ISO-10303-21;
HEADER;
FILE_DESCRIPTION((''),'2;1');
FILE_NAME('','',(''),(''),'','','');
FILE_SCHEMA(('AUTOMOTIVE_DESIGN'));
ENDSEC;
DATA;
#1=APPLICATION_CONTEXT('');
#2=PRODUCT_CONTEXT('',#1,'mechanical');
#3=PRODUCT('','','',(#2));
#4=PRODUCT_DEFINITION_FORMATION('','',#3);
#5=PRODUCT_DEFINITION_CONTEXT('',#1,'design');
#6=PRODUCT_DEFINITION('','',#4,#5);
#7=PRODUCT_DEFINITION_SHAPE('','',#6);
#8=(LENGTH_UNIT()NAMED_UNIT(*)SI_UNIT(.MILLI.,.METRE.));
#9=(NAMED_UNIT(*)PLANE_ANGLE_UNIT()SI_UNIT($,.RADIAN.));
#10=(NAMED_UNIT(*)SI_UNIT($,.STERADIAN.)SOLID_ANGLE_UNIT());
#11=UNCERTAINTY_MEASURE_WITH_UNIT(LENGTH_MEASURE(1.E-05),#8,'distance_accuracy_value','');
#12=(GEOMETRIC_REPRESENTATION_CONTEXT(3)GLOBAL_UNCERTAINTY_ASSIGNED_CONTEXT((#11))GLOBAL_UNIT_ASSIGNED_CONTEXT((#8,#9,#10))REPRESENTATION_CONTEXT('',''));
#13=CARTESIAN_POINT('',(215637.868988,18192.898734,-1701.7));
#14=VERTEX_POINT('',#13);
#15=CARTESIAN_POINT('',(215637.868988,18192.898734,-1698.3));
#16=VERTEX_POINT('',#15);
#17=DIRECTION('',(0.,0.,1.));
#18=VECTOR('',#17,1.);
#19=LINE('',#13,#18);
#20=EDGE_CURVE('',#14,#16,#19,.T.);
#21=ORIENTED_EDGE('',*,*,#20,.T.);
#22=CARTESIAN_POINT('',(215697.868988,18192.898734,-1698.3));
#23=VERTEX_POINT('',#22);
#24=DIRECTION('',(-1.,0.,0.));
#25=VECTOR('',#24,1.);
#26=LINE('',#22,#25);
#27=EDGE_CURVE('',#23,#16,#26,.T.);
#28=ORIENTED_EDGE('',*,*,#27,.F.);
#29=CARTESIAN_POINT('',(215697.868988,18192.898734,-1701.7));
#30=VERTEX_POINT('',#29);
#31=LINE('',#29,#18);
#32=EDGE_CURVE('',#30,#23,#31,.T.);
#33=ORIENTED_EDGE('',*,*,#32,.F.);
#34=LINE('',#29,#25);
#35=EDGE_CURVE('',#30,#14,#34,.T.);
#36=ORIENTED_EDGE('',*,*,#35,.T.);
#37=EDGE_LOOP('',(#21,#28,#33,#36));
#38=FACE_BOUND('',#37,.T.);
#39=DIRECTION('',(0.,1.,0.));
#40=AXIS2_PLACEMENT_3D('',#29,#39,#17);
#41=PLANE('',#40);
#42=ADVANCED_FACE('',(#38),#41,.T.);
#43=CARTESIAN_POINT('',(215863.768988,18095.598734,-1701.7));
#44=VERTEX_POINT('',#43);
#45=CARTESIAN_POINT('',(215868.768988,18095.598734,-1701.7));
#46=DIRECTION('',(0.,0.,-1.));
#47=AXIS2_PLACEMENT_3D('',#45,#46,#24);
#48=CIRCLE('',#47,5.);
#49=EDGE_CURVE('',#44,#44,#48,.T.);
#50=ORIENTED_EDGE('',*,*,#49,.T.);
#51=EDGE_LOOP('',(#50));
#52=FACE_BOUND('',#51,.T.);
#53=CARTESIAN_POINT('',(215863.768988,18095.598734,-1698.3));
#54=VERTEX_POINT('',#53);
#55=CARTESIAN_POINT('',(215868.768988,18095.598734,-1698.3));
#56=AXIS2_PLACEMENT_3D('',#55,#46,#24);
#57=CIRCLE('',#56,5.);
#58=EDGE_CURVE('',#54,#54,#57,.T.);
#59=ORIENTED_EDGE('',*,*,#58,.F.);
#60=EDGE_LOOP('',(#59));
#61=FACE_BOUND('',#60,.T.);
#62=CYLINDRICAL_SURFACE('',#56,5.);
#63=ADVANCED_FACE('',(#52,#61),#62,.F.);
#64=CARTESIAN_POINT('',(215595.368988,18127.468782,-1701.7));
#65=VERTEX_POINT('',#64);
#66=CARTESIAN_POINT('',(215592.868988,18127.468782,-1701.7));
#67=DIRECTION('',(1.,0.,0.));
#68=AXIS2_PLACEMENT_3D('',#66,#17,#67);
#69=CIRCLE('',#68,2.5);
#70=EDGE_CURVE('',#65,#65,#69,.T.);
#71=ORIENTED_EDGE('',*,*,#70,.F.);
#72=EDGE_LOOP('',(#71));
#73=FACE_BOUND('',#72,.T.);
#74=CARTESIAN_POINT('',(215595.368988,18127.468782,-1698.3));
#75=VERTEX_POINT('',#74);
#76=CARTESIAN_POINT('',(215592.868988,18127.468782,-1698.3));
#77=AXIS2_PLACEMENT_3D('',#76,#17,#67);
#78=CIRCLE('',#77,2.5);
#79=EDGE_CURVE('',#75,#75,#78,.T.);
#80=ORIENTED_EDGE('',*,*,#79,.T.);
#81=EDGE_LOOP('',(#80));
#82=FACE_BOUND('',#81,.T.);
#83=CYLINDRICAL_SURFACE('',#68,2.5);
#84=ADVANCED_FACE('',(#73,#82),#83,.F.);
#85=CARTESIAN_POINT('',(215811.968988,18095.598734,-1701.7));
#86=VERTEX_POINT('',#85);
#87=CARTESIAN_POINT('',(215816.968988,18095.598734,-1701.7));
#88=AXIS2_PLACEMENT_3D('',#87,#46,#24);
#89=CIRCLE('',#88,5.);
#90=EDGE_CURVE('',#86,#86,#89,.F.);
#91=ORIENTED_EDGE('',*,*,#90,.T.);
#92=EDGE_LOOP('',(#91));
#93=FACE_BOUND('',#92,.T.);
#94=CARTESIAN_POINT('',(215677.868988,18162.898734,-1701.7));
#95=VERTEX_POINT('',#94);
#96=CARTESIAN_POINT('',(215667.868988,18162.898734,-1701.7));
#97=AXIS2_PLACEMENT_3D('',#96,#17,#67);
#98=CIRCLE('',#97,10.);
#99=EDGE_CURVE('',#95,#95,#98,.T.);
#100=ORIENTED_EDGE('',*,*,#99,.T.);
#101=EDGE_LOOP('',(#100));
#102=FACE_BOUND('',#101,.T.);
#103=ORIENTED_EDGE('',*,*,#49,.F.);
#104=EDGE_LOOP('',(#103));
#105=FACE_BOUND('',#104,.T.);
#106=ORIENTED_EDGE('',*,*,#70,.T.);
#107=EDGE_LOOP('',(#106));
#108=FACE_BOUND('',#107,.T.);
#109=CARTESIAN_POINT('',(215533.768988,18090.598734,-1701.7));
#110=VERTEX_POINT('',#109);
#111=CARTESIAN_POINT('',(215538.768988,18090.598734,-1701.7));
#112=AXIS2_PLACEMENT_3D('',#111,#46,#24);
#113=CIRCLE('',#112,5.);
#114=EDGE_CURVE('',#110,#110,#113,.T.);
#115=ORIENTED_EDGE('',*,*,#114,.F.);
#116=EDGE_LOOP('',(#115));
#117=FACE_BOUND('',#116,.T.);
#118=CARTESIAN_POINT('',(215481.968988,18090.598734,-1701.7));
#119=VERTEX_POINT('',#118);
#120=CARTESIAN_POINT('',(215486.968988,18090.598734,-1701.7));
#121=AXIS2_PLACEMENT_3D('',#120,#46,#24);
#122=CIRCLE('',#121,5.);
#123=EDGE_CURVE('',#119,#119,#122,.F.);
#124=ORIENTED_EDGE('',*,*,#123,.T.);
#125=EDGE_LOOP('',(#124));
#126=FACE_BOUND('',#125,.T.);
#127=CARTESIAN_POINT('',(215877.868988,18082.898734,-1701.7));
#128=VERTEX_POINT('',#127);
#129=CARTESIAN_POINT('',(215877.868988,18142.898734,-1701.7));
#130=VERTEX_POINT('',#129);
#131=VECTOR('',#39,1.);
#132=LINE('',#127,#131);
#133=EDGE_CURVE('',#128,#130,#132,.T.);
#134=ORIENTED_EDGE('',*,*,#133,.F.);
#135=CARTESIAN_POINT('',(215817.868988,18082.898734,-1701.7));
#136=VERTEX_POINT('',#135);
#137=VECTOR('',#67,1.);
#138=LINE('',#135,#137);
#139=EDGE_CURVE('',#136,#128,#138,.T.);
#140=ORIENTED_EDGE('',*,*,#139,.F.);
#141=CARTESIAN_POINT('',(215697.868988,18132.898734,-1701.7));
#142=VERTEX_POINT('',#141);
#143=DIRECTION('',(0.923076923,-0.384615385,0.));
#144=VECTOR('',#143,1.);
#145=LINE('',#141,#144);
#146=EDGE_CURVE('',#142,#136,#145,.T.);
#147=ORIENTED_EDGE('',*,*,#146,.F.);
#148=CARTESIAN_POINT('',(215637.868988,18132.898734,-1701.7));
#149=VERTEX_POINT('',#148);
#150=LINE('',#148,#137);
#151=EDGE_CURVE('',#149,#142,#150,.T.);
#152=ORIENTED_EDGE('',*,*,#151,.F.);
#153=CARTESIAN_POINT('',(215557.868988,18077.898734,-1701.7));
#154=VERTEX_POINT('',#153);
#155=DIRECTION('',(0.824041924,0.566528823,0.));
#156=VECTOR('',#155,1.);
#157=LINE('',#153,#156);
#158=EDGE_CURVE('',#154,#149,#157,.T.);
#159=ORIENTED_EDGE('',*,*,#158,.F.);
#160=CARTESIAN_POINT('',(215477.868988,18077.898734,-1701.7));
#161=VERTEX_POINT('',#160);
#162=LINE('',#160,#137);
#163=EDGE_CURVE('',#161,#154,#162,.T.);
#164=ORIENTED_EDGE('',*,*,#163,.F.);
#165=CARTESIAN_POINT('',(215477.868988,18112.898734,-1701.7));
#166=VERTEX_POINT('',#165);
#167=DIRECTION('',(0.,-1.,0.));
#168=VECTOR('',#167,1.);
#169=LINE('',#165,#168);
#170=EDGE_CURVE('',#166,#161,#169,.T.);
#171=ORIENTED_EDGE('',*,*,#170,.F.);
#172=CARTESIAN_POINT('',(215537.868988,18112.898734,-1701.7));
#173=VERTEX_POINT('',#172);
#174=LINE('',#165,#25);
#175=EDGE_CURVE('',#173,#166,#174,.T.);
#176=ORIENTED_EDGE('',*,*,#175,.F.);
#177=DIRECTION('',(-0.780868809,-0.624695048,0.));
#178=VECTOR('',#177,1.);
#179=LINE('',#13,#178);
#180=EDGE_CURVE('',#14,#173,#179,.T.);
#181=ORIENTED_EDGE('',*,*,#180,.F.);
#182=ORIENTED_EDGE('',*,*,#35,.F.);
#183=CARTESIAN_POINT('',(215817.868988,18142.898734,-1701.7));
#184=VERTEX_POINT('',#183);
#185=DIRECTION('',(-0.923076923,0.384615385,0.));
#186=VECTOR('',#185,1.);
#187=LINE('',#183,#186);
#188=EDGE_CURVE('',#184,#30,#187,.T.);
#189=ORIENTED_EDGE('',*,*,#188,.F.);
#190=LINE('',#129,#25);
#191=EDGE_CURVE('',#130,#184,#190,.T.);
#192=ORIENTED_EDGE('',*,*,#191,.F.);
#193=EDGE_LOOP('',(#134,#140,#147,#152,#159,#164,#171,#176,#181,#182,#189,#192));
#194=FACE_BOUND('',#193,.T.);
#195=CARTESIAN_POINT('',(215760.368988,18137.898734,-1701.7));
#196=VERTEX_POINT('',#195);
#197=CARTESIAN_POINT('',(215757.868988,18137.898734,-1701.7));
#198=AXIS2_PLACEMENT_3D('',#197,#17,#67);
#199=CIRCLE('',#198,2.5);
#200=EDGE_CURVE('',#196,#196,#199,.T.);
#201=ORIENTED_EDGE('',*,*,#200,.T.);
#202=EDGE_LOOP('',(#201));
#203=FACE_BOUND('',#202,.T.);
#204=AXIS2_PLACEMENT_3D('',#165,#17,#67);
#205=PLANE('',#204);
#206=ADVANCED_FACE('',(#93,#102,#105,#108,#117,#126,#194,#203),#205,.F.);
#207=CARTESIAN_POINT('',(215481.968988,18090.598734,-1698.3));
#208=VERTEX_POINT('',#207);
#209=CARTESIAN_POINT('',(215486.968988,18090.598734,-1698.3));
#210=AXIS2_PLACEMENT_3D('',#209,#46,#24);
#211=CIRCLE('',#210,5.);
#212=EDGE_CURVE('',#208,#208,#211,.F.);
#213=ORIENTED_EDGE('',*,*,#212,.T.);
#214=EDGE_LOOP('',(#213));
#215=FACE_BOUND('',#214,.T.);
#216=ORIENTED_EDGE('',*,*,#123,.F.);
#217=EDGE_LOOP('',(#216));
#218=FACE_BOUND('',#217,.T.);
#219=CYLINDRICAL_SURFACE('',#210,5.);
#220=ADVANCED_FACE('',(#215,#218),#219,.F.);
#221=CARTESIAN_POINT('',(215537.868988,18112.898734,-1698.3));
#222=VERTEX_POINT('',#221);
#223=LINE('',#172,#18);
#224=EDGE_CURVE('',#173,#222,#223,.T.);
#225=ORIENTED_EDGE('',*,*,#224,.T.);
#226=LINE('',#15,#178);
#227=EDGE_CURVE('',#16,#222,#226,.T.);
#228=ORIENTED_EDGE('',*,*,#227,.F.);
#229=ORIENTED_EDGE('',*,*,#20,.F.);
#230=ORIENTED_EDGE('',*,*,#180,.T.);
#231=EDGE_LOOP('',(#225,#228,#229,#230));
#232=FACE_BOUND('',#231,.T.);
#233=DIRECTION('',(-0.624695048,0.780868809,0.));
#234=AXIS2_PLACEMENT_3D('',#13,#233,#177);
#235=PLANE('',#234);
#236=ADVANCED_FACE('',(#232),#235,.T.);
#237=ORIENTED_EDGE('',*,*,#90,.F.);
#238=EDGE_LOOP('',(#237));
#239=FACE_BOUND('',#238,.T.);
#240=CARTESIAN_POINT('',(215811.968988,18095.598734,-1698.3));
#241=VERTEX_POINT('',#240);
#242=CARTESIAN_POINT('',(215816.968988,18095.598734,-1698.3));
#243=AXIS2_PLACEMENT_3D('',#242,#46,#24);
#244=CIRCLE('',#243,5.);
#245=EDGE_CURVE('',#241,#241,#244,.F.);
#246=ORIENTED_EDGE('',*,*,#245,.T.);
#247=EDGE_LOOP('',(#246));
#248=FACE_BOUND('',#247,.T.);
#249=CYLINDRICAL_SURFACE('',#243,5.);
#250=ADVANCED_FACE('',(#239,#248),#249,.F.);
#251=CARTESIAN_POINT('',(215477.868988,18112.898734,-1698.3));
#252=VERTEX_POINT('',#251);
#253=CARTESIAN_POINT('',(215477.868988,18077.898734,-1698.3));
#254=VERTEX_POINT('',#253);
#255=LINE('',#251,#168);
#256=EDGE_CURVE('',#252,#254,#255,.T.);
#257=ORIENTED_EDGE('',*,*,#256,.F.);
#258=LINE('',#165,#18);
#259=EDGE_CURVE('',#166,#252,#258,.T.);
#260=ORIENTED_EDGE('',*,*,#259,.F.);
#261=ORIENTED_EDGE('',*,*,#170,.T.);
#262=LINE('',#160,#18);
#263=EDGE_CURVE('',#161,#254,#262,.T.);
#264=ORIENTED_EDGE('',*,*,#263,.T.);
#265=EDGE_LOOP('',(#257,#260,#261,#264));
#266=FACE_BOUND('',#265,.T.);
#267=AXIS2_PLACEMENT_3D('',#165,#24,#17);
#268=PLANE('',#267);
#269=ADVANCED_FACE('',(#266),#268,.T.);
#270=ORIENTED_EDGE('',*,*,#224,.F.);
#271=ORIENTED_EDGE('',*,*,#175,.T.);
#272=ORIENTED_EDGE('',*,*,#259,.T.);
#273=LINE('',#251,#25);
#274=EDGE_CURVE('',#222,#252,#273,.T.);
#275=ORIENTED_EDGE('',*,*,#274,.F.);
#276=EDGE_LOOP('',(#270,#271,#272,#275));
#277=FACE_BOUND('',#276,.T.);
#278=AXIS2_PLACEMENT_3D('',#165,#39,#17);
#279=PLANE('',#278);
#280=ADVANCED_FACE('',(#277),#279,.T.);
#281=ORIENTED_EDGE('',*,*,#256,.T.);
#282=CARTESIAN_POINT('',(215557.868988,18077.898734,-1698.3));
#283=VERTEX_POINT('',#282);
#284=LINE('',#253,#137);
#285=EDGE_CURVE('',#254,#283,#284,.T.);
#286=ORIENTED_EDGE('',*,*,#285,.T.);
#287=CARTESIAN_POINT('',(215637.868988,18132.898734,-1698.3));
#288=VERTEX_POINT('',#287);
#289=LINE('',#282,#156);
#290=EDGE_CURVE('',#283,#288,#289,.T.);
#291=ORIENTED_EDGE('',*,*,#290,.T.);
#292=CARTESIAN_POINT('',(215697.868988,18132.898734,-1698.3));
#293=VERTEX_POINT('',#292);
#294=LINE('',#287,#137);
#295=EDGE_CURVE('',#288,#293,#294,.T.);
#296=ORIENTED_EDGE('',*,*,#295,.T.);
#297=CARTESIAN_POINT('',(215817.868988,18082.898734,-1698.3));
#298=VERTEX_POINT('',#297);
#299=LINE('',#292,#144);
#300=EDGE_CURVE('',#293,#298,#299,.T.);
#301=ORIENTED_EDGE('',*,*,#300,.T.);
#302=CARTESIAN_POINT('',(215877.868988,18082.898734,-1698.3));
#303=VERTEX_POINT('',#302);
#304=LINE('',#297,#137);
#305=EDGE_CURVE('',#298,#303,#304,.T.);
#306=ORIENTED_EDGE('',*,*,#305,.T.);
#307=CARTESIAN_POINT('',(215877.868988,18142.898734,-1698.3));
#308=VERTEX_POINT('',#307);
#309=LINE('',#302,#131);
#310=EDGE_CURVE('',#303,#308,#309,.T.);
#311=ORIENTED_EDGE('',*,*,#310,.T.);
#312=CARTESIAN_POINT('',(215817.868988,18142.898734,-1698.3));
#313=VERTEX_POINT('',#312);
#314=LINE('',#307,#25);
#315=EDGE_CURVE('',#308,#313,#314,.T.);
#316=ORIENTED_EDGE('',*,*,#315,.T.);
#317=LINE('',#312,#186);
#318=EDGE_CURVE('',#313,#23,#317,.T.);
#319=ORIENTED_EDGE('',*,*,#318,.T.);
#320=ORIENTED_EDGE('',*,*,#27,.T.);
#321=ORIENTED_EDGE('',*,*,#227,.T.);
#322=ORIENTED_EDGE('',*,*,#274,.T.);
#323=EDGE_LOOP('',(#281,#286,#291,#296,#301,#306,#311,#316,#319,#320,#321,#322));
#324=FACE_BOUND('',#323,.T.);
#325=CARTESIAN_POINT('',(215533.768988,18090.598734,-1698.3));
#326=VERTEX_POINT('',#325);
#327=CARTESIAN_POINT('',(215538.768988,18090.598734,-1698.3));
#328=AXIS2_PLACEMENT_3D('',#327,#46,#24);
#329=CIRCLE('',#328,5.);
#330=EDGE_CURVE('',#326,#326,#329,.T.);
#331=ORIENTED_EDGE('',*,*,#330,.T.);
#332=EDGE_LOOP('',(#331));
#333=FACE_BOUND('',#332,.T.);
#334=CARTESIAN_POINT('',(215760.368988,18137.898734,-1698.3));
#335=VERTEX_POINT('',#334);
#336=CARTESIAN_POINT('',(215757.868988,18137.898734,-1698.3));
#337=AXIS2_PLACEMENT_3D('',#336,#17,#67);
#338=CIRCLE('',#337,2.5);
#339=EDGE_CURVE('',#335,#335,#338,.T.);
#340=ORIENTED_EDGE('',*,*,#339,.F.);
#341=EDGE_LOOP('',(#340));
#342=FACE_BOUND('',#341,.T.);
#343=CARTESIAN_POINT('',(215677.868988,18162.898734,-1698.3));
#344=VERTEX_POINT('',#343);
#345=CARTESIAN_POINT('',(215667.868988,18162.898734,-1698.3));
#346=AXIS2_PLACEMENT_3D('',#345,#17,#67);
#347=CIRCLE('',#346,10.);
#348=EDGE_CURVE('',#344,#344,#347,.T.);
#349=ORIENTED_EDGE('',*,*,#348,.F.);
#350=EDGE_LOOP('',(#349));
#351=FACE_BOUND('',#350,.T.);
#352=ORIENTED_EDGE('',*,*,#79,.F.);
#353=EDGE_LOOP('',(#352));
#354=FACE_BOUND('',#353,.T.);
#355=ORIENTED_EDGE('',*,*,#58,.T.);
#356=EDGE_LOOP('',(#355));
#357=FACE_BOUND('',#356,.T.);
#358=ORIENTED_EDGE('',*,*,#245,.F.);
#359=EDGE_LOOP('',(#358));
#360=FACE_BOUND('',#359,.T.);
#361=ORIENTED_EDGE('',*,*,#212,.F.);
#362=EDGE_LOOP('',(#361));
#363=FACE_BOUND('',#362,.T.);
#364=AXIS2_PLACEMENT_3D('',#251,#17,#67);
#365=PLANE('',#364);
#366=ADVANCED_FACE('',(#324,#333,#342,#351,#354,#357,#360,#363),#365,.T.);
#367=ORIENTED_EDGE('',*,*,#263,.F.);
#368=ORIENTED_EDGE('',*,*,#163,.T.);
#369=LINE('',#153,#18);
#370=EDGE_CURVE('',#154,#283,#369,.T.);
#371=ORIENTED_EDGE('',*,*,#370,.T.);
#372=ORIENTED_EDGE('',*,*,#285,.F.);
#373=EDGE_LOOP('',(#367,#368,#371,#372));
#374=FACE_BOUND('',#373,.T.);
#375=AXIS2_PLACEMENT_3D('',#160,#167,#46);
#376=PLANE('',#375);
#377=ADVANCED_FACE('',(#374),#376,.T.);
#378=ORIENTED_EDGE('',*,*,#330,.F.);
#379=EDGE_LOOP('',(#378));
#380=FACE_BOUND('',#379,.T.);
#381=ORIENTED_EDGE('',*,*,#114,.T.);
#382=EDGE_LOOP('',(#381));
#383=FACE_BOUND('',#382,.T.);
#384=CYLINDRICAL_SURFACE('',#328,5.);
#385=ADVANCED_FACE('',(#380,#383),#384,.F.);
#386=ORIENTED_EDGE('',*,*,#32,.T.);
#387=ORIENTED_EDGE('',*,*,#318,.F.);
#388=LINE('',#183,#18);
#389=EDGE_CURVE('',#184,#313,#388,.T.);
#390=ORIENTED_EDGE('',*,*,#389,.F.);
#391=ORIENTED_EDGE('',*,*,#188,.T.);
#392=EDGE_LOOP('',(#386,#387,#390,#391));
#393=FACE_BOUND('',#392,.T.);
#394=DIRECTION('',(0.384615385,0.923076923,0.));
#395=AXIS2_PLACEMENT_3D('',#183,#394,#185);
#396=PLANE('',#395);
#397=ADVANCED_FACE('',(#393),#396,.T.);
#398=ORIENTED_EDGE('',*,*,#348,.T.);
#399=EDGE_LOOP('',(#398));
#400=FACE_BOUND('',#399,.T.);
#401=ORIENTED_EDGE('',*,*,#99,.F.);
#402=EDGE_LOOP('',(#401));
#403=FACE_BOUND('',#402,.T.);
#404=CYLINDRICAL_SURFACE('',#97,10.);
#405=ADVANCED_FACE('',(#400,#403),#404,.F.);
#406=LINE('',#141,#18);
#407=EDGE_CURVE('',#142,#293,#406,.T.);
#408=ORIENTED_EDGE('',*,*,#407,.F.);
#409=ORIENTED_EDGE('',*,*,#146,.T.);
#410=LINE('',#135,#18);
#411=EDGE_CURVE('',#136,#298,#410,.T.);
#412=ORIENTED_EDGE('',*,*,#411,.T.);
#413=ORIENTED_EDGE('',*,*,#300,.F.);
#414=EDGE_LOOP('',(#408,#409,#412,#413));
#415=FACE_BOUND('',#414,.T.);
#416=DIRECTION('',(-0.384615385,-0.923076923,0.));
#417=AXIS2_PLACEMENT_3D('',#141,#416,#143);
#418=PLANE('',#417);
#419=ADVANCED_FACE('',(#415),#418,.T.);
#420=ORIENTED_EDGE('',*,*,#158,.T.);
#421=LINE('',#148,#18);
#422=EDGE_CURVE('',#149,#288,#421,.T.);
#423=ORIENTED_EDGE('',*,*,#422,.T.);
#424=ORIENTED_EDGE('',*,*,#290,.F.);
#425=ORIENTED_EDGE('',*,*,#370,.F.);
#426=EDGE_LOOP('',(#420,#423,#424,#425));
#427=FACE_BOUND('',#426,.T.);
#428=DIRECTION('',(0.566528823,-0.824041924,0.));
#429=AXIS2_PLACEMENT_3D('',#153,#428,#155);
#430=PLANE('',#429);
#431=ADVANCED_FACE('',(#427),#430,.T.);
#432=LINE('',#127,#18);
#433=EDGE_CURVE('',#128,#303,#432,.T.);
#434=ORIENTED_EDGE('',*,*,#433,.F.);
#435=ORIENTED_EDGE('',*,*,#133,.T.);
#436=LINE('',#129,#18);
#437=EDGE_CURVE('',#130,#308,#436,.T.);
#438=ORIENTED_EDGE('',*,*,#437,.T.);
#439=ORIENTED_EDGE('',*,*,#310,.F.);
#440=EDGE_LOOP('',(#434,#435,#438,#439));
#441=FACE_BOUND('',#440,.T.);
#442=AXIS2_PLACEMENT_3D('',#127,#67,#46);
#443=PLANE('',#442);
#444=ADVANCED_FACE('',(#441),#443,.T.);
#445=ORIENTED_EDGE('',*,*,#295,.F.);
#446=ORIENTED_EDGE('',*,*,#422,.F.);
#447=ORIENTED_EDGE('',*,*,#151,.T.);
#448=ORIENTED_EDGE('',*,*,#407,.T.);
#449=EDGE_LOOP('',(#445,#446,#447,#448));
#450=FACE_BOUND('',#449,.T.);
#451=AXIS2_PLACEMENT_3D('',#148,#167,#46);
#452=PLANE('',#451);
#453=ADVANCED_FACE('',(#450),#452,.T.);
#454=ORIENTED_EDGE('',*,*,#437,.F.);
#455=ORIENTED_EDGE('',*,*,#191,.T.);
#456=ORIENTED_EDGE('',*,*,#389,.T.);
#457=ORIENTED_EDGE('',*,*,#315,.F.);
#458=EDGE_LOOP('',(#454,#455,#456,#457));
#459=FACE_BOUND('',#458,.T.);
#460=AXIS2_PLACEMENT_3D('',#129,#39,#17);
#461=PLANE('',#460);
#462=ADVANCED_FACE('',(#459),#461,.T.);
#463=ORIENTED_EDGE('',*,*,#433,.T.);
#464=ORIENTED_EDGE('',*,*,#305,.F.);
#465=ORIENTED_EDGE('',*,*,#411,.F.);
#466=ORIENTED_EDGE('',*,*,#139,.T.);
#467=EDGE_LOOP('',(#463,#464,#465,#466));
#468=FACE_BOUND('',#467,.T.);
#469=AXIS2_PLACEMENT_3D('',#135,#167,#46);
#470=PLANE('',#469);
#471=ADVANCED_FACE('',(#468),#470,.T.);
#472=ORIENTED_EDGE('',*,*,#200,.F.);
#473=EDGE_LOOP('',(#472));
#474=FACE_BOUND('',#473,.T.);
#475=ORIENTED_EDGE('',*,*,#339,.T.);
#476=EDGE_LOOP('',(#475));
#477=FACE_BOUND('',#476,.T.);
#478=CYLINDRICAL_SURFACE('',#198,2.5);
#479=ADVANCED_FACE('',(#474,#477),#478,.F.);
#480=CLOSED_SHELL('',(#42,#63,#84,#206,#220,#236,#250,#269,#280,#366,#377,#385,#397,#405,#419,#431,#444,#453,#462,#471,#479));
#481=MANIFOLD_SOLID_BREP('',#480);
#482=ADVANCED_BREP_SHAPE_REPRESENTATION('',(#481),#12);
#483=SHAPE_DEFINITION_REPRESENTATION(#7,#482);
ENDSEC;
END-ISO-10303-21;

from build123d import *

# Parameters (mm, degrees)
SKETCH1_R          = 10000
SKETCH1_R_2        = 2500
BASE_FLANGE1_DEPTH = 3400
SCALE1_SCALE       = 0.001
SKETCH2_R          = 5
CUT_EXTRUDE1_DEPTH = 216644.107193969


# Sheet-metal steps are written as plain solids
with BuildPart() as part:
    # Sketch1 → Base-Flange1 (new body)
    with BuildSketch(Plane.XY):
        Polygon((0, 0), (0, -35000), (80000, -35000), (160000, 20000), (220000, 20000), (340000, -30000), (400000, -30000), (400000, 30000), (340000, 30000), (220000, 80000), (160000, 80000), (60000, 0), align=None)
        with Locations((190000, 50000)):
            Circle(SKETCH1_R, mode=Mode.SUBTRACT)
        with Locations((280000, 25000)):
            Circle(SKETCH1_R_2, mode=Mode.SUBTRACT)
        with Locations((115000, 14570.048045386)):
            Circle(SKETCH1_R_2, mode=Mode.SUBTRACT)
    extrude(amount=-BASE_FLANGE1_DEPTH)


with BuildPart() as part_1:
    # Scale1: scaled about (215693.562550425, 18131.029763925, -1700)
    add(part.part.scale(SCALE1_SCALE).moved(Location((215477.868987875, 18112.898734161, -1698.3))))

    # Sketch2 → Cut-Extrude1 (cut, through all)
    with BuildSketch(Plane(origin=(0, 0, -1701.7), x_dir=(-1, 0, 0), z_dir=(0, 0, -1))):
        with Locations((-215486.968987875, 18090.598734161)):
            Circle(SKETCH2_R)
        with Locations((-215538.768987875, 18090.598734161)):
            Circle(SKETCH2_R)
        with Locations((-215816.968987875, 18095.598734161)):
            Circle(SKETCH2_R)
        with Locations((-215868.768987875, 18095.598734161)):
            Circle(SKETCH2_R)
    extrude(amount=-CUT_EXTRUDE1_DEPTH, mode=Mode.SUBTRACT)


solid = part_1.part
